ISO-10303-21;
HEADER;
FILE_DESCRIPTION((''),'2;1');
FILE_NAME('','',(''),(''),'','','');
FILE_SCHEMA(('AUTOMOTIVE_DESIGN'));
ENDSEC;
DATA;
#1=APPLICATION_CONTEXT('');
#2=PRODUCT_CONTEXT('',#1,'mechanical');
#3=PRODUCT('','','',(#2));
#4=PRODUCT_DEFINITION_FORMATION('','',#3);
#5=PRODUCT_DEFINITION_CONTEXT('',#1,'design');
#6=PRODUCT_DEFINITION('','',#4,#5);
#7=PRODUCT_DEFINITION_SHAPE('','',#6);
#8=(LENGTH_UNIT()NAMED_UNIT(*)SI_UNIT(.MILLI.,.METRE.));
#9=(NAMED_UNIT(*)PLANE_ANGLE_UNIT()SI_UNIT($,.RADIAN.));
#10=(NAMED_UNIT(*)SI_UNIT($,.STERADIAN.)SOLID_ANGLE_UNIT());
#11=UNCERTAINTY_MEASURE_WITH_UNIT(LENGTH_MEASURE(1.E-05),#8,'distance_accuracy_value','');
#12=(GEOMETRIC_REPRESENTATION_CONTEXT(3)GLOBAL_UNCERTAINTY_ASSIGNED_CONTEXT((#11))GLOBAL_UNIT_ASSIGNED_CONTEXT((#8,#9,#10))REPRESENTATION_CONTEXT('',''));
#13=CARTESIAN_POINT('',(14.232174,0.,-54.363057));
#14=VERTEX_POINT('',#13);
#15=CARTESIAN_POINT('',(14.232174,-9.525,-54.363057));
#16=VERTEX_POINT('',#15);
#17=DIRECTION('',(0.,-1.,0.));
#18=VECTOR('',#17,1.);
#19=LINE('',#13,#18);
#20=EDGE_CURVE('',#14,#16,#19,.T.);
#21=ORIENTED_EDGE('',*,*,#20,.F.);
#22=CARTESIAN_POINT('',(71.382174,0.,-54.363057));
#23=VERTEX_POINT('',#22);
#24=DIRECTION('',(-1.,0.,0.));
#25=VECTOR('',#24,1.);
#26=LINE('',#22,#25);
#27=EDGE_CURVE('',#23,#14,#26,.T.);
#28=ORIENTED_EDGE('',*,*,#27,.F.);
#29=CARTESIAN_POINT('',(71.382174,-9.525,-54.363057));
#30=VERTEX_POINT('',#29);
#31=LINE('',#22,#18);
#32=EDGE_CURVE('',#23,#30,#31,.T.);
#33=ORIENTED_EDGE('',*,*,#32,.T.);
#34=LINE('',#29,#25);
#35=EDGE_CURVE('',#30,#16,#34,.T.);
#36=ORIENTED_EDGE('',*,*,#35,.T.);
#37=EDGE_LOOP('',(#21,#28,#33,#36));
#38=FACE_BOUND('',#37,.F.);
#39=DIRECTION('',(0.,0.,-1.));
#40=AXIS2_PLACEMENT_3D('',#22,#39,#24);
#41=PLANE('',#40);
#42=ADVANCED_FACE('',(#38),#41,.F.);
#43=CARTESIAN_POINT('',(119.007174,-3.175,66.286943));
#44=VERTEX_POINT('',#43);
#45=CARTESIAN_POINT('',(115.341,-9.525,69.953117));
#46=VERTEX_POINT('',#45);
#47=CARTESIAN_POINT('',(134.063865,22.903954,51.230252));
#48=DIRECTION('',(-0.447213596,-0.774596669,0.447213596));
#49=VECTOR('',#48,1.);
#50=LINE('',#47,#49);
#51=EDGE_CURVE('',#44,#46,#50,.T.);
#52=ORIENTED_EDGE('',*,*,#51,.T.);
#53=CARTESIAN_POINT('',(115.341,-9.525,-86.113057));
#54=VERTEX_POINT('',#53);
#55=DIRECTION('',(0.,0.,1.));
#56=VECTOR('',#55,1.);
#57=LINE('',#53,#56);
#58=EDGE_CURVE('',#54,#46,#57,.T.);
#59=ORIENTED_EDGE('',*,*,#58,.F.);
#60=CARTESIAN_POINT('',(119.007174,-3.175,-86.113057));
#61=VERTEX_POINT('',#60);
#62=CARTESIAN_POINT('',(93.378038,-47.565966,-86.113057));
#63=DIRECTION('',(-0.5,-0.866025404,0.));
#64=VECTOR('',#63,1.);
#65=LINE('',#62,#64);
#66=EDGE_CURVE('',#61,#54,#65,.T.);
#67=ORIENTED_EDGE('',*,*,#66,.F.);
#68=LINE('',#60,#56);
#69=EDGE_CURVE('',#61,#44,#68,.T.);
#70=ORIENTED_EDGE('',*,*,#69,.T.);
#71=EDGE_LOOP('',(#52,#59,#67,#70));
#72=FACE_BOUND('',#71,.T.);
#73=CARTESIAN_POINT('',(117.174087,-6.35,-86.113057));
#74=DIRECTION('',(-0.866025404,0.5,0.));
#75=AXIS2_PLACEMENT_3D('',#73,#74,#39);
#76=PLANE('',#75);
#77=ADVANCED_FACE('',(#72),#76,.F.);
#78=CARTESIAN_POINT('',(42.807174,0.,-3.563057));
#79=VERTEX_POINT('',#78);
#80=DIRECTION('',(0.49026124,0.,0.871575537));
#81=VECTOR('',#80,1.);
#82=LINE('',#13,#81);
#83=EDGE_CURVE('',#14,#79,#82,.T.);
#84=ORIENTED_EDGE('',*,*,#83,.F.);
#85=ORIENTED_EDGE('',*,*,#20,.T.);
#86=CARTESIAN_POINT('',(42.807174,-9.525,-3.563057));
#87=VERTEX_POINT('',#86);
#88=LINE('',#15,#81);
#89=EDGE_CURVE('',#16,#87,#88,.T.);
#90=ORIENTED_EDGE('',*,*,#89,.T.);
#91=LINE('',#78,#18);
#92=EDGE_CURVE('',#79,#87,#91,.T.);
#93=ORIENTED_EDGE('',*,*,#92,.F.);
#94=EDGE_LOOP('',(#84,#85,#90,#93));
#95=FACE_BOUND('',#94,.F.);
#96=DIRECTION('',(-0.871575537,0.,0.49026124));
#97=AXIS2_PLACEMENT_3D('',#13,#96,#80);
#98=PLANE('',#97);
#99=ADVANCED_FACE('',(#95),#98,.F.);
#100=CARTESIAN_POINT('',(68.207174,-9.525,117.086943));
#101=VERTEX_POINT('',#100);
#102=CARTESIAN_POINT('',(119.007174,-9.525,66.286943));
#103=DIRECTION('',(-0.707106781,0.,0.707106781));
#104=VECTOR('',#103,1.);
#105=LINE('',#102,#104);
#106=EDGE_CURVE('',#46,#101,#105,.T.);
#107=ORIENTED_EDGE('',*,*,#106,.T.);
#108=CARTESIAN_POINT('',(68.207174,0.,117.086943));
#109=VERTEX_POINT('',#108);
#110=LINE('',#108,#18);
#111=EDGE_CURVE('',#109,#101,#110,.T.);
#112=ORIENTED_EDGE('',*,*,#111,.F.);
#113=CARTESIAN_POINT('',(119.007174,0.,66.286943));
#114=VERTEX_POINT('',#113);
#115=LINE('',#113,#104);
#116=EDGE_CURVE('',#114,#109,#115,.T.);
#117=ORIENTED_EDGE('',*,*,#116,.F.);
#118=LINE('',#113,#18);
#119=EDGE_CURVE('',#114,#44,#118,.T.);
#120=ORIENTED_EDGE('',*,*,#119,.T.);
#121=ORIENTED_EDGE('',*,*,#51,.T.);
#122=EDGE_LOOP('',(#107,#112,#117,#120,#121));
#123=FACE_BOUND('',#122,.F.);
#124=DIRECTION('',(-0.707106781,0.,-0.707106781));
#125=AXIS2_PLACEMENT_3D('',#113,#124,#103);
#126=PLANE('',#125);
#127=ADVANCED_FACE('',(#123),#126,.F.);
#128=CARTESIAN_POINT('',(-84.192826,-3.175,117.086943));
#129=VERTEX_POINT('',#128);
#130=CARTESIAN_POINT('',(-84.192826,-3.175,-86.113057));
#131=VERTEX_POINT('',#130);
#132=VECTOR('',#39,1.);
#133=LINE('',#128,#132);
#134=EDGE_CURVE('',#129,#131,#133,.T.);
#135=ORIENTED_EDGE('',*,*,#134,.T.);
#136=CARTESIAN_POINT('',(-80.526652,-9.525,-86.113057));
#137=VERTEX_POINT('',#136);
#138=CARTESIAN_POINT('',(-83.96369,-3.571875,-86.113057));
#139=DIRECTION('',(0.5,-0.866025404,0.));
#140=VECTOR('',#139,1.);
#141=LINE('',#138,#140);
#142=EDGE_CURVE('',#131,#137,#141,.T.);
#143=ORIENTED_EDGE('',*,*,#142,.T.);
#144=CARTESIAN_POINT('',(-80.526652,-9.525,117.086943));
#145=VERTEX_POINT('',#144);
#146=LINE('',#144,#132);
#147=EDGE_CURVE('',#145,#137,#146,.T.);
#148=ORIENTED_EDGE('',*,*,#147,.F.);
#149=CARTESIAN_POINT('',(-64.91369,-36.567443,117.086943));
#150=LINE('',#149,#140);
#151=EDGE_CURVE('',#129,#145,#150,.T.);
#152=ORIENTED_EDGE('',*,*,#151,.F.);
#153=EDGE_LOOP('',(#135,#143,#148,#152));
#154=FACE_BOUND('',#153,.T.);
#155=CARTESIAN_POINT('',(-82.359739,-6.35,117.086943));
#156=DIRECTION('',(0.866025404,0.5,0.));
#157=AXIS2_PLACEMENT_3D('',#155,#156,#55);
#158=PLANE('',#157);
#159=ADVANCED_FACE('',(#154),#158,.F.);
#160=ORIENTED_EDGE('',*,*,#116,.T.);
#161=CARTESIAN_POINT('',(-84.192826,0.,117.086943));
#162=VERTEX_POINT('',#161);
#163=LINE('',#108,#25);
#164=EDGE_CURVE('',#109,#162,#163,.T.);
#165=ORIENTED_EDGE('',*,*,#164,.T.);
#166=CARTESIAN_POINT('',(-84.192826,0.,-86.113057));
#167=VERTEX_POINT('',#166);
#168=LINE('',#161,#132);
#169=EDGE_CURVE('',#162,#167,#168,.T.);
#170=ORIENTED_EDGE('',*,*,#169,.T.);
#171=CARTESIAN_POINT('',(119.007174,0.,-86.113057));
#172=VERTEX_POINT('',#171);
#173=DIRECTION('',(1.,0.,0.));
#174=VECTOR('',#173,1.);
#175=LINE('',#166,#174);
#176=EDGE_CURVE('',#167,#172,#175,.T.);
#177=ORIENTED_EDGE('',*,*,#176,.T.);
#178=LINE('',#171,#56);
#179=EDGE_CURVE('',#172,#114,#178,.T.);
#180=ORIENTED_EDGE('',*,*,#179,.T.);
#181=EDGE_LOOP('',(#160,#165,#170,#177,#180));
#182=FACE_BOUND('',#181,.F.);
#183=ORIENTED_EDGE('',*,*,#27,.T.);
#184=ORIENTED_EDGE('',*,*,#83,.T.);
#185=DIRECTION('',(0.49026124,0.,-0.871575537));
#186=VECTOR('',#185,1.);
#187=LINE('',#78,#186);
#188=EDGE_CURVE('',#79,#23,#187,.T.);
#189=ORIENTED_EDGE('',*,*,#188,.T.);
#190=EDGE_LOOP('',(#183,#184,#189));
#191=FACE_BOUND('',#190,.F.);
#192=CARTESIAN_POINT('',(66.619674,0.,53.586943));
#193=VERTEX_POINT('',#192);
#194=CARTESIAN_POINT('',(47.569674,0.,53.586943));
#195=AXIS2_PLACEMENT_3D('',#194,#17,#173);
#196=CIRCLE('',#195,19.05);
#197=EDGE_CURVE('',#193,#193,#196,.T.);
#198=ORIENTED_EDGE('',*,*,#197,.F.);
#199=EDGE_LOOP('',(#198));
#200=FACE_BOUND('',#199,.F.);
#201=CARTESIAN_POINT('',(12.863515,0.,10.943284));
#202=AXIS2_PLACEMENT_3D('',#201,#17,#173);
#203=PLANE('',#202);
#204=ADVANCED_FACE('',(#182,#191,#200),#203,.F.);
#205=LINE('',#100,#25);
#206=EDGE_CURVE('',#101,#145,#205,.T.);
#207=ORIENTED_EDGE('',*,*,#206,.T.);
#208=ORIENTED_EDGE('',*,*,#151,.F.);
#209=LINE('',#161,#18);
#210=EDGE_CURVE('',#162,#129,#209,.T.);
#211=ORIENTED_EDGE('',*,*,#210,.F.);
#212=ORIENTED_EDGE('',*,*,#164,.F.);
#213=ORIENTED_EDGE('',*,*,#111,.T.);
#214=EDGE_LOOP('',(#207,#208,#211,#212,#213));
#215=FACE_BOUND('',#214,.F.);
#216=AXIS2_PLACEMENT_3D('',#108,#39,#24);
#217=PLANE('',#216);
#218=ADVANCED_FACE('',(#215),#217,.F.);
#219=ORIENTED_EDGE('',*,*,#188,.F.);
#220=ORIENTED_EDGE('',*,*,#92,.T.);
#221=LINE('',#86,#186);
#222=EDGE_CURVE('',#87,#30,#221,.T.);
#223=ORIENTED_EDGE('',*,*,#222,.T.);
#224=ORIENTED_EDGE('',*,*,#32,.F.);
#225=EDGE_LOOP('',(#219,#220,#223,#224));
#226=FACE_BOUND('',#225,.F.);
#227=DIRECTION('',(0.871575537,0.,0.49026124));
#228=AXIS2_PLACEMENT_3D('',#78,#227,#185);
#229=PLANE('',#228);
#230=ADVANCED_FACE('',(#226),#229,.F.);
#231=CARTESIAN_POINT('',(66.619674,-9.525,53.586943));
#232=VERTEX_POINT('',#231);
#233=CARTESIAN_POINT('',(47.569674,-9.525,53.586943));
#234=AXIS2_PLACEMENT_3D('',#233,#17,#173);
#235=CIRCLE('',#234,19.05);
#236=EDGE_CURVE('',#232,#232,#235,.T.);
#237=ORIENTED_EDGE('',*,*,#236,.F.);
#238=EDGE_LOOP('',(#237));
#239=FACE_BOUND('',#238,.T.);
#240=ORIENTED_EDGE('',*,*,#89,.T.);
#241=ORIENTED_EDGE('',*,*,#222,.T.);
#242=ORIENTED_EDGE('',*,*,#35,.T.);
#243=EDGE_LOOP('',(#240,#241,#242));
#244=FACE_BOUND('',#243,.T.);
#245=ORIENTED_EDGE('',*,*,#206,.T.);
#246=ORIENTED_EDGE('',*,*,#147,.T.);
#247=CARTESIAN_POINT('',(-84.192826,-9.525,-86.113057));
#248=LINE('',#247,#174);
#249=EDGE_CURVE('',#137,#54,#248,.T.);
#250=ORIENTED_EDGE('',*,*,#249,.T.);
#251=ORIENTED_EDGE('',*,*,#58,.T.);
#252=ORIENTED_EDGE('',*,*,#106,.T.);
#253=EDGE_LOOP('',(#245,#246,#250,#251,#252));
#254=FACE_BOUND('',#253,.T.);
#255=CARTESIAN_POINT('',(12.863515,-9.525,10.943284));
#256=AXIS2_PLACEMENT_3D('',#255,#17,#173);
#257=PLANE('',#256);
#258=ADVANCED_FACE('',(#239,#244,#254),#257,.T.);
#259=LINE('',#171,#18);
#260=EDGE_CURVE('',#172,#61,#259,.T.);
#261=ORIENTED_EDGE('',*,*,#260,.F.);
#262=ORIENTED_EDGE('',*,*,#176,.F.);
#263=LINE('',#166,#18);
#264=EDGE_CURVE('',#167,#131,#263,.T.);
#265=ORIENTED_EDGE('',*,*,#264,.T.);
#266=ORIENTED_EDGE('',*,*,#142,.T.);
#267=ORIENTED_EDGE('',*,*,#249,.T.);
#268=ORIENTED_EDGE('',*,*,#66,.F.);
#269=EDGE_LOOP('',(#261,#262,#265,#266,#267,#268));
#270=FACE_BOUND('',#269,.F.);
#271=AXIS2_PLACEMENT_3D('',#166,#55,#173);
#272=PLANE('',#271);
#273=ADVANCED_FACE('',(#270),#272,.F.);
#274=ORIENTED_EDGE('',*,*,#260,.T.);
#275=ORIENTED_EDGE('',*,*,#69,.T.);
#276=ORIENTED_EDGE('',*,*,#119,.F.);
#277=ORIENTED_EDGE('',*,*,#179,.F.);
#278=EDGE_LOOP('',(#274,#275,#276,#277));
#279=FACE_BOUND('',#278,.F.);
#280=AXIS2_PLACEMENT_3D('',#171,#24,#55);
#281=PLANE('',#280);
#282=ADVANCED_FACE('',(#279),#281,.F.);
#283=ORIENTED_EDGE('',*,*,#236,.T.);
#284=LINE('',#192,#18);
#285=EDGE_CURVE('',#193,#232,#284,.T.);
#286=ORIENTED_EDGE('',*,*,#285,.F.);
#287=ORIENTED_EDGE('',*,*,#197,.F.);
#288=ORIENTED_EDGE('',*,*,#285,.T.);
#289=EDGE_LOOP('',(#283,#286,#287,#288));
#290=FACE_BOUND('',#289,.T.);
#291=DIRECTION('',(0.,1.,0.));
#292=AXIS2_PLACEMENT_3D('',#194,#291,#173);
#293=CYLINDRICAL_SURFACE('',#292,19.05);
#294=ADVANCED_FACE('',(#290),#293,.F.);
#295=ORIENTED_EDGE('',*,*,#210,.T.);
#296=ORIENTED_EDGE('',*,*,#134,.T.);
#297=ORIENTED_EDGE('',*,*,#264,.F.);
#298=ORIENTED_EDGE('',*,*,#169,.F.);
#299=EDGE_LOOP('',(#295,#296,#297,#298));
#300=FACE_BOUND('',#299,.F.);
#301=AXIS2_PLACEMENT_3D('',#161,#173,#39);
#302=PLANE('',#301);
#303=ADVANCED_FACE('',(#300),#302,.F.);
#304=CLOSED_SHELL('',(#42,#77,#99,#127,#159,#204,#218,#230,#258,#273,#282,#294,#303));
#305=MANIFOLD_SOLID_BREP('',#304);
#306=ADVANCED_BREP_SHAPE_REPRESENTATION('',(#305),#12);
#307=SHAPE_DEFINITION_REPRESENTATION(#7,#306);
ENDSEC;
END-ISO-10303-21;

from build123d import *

# Parameters (mm, degrees)
F0_R     = 19.05
F1_DEPTH = 9.525
F2_SIZE2 = 3.6661742094
F2_SIZE  = 6.35
F3_SIZE2 = 3.6661742094
F3_SIZE  = 6.35


# Not quite as in the source:
# - a length typed as a fraction of an inch, garbled in the dataset ("3 / 203.2 mm" for 3/8 in), is restored


with BuildPart() as f1:
    # F0 (on Front) → F1 (new body)
    with BuildSketch(Plane.XZ):
        Polygon((68.2071738782, 117.0869429827), (-84.1928261218, 117.0869429827), (-84.1928261218, -86.1130570173), (119.0071738782, -86.1130570173), (119.0071738782, 66.2869429827), align=None)
        Polygon((14.2321738782, -54.3630570173), (42.8071738782, -3.5630570173), (71.3821738782, -54.3630570173), align=None, mode=Mode.SUBTRACT)
        with Locations((47.5696738782, 53.5869429827)):
            Circle(F0_R, mode=Mode.SUBTRACT)
    extrude(amount=F1_DEPTH)

    # F2
    f2_edges = [f1.edges().sort_by_distance(p)[0] for p in [
        (119.007174, -9.525, -9.913057),
    ]]
    f2_side = f1.faces().sort_by_distance((119.007174, -4.7625, -9.913057))[0]
    chamfer(f2_edges, length=F2_SIZE, length2=F2_SIZE2, reference=f2_side)

    # F3
    f3_edges = [f1.edges().sort_by_distance(p)[0] for p in [
        (-84.192826, -9.525, 15.486943),
    ]]
    f3_side = f1.faces().sort_by_distance((-84.192826, -4.7625, 15.486943))[0]
    chamfer(f3_edges, length=F3_SIZE, length2=F3_SIZE2, reference=f3_side)


solid = f1.part
